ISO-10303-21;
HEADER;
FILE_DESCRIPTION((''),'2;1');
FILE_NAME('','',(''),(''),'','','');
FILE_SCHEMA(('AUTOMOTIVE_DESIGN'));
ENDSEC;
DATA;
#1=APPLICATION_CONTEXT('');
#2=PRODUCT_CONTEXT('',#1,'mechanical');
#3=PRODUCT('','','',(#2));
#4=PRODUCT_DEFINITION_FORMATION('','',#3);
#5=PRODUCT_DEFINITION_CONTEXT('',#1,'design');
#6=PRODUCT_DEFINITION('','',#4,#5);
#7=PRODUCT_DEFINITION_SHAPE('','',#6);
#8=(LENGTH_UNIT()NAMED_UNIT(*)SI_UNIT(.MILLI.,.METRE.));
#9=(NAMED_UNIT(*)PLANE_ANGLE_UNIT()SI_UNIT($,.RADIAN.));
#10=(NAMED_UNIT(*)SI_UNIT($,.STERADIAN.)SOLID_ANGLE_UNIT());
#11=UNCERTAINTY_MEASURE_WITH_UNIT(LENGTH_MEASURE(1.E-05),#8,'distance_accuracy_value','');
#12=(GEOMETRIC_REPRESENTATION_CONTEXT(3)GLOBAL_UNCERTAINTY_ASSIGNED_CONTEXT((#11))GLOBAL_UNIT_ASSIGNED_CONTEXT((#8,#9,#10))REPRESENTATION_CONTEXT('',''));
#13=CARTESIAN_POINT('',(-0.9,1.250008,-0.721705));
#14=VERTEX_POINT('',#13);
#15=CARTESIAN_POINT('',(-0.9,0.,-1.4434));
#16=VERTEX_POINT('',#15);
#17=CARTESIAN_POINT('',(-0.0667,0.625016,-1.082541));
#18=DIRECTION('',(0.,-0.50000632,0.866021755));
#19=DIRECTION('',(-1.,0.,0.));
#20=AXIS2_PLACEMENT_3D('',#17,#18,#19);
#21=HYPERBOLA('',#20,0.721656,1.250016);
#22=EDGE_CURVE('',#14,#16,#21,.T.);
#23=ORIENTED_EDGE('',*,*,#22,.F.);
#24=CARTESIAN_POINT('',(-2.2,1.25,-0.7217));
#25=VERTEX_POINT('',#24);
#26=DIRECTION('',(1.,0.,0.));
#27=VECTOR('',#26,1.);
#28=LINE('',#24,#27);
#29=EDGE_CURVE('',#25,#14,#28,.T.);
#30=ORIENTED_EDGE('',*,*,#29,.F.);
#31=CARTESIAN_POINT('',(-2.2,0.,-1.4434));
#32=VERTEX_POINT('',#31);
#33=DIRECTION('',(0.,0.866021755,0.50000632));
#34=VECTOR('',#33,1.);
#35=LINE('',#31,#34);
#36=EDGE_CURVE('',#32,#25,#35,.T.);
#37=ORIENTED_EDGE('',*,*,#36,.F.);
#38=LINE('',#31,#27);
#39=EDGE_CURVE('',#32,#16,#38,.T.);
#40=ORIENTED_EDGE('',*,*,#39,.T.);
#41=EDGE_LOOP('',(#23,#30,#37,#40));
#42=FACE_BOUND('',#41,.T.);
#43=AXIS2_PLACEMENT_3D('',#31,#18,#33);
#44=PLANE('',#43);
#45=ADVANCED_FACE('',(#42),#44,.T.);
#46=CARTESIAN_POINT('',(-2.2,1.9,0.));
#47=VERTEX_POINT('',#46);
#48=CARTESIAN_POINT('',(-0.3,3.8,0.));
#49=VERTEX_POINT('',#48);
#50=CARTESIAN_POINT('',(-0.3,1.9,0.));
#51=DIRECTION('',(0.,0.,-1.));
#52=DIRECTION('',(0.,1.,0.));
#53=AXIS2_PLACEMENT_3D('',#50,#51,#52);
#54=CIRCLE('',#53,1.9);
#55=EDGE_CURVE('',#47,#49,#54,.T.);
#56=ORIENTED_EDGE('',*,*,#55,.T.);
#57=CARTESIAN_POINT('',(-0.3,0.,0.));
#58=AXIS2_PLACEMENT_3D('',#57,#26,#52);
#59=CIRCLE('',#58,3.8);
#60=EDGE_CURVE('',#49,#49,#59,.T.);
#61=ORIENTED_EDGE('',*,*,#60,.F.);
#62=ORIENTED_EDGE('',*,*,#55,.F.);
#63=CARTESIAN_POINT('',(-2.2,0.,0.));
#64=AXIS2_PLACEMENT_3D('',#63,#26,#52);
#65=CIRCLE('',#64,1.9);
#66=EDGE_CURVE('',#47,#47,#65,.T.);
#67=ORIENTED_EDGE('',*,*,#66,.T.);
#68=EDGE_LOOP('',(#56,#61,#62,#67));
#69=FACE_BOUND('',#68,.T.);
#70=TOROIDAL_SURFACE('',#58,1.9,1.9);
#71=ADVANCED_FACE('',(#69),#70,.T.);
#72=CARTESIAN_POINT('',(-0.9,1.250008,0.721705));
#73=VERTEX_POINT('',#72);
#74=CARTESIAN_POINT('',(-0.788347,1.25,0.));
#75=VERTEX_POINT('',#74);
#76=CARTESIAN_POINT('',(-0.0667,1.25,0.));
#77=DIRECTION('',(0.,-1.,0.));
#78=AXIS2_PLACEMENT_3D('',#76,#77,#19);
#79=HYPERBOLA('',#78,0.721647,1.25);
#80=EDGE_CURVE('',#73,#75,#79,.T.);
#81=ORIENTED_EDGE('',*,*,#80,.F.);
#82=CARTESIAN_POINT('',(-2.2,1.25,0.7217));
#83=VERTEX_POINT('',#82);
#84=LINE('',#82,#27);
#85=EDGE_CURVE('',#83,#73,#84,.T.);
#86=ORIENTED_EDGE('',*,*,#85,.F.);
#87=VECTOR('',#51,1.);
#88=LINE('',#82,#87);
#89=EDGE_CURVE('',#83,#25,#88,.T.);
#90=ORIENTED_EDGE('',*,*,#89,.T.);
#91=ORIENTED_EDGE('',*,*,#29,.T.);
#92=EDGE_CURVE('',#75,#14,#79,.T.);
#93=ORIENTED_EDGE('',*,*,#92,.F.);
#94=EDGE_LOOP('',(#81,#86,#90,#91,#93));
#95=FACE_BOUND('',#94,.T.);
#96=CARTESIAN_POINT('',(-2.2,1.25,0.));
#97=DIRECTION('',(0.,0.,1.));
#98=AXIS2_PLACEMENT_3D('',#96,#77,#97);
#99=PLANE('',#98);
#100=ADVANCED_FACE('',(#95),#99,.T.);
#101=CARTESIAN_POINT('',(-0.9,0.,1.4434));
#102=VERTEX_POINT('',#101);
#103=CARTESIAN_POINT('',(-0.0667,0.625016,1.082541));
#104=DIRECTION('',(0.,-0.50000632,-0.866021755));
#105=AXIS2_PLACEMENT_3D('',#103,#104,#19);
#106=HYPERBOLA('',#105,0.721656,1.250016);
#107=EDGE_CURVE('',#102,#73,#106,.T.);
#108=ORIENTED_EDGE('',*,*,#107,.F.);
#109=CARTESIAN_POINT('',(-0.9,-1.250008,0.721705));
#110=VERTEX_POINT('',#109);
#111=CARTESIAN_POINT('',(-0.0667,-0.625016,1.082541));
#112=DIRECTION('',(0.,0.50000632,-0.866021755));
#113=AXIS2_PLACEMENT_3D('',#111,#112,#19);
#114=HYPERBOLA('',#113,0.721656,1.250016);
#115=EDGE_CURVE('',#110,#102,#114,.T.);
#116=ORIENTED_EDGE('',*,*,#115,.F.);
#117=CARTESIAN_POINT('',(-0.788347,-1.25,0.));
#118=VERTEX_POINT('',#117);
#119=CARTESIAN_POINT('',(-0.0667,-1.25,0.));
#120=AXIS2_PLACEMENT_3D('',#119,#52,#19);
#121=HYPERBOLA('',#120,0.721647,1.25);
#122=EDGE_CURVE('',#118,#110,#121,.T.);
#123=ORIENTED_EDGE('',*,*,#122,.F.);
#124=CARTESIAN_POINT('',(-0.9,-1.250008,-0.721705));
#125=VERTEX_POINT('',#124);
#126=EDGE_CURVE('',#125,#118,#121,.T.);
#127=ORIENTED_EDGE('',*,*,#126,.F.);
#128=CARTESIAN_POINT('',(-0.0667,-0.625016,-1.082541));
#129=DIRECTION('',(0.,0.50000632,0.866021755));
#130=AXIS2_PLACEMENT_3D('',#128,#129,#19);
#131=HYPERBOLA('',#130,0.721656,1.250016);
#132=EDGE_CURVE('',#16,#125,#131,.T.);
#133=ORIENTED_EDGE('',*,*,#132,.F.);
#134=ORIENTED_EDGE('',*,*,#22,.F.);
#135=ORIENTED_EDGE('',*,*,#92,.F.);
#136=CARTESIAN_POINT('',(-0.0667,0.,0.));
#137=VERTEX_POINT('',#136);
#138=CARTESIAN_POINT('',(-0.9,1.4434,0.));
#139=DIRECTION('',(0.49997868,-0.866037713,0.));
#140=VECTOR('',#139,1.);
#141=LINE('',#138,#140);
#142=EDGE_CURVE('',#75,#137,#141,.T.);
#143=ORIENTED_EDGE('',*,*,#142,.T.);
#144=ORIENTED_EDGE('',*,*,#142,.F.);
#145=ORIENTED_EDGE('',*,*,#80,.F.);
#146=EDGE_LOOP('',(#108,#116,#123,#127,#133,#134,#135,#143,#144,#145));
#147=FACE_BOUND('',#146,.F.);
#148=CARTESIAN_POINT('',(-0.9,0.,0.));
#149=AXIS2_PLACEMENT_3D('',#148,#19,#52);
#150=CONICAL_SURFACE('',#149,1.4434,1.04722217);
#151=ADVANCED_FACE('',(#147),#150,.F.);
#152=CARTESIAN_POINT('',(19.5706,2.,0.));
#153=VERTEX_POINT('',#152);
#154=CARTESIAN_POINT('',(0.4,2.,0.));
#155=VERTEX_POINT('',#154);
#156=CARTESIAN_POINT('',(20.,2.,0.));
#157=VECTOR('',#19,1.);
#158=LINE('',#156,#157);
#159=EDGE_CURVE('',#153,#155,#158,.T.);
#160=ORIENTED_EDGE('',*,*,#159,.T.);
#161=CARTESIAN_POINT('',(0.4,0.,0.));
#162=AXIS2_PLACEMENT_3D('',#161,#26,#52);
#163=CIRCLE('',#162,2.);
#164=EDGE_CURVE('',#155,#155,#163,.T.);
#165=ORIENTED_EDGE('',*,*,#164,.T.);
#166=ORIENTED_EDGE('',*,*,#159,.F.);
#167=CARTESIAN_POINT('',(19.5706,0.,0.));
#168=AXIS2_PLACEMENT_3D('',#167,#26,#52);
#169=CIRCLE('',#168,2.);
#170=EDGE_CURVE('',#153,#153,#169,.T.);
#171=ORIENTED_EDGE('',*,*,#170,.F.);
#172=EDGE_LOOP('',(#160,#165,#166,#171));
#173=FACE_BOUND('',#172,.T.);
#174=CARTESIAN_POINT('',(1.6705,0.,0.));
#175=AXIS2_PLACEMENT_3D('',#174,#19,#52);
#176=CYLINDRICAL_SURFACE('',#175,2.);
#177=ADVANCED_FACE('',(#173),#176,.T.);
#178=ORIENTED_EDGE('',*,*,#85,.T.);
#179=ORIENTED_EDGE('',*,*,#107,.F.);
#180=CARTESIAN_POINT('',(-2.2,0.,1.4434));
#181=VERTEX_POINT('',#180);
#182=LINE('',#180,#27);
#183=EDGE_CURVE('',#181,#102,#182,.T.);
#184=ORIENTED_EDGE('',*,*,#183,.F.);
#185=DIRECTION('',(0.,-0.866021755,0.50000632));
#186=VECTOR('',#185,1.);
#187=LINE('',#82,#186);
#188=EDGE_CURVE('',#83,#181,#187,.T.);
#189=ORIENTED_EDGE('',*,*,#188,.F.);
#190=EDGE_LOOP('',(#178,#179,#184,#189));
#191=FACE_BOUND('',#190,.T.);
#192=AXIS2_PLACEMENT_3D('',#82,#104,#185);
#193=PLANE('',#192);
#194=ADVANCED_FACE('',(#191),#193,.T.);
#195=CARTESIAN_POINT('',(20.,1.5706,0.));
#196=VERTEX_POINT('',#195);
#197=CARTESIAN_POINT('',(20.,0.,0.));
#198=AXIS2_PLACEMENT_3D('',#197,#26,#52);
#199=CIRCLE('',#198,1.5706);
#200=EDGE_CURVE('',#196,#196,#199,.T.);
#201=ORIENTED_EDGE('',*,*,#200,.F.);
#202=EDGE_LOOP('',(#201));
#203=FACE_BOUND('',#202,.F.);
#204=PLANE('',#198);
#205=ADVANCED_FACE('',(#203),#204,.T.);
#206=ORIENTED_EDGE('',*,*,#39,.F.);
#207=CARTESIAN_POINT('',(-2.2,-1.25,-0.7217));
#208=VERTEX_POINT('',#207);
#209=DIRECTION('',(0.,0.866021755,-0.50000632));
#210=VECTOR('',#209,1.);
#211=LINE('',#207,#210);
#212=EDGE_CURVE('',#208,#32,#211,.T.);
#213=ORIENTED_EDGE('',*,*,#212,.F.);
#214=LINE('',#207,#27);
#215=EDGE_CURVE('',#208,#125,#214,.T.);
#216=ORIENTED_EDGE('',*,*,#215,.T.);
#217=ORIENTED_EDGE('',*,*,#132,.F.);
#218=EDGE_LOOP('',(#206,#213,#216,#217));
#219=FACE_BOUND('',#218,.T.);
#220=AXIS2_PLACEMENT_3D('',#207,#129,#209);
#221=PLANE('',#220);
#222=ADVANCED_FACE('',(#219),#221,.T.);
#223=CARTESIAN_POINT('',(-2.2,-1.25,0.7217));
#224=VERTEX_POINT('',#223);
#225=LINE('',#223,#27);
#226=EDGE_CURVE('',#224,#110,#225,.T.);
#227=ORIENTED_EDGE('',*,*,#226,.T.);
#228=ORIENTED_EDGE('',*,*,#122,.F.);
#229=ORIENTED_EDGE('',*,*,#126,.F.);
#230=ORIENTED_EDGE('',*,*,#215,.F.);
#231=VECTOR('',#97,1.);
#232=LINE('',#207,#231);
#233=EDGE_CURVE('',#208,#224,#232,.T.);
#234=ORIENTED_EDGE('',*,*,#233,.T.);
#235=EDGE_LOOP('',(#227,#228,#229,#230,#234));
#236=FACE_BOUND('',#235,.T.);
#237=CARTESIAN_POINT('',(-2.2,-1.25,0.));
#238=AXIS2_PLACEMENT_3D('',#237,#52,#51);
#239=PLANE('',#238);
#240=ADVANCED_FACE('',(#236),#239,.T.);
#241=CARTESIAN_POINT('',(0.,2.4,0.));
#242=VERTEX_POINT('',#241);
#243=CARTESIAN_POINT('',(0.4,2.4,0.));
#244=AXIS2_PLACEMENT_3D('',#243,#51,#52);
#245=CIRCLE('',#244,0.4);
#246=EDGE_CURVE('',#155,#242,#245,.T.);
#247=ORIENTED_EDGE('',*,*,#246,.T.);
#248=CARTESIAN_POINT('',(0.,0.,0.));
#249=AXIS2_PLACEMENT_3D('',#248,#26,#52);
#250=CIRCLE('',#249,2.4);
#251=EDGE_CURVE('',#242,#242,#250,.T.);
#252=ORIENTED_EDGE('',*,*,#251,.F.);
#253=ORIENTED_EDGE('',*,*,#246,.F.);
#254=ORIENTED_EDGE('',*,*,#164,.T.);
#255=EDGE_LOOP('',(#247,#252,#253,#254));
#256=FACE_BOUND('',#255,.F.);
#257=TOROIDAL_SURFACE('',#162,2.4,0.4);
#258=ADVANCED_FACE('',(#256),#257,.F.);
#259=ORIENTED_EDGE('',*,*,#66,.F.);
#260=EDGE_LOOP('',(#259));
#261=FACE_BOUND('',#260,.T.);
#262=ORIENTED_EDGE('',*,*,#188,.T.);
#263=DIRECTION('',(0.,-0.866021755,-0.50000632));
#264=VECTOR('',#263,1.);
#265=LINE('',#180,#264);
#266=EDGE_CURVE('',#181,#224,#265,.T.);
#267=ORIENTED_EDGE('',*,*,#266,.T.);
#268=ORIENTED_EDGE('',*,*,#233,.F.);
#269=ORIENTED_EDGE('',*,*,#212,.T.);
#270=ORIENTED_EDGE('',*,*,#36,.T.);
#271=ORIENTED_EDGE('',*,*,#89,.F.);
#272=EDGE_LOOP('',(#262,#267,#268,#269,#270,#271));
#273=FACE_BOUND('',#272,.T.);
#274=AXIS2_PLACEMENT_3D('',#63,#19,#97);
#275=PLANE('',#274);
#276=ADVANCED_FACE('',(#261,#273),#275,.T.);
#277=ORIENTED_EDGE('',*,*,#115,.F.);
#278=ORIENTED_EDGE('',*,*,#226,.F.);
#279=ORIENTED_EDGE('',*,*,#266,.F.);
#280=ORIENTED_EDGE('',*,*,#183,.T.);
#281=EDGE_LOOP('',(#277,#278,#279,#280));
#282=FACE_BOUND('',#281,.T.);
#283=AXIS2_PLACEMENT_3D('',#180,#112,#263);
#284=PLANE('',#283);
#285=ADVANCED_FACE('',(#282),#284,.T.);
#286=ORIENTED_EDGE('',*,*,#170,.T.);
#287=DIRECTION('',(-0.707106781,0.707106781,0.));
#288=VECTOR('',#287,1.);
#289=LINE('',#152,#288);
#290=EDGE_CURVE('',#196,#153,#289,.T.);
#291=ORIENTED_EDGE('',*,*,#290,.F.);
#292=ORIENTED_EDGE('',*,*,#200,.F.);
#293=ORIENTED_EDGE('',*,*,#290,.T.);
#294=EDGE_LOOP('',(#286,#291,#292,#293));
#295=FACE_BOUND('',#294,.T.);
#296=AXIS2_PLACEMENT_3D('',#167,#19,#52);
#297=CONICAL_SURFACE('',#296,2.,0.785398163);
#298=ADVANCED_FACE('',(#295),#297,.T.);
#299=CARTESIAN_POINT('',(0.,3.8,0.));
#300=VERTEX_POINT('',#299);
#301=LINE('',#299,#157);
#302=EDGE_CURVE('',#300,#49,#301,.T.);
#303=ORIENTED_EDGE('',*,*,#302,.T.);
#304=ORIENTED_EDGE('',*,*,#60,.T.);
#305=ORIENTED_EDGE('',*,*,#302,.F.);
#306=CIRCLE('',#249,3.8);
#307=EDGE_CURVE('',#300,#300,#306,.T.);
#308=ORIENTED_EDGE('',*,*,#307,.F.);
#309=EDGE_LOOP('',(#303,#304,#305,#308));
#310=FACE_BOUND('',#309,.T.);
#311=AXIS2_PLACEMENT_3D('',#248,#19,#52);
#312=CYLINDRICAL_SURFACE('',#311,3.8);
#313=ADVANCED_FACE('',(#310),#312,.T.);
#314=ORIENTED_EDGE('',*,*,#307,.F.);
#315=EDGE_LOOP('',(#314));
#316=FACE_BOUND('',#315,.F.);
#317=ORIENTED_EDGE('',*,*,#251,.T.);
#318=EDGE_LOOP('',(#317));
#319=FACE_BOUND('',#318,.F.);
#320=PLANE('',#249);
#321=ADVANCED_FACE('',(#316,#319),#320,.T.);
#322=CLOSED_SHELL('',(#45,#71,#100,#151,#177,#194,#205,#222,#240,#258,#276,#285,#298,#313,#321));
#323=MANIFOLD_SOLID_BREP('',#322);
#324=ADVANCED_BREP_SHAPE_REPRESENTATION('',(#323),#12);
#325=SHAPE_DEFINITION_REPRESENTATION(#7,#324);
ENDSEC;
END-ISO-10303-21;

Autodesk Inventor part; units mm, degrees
ref_plane "YZ Plane" through (0, 0, 0) normal (1, 0, 0) x (0, 1, 0)
ref_plane "XZ Plane" through (0, 0, 0) normal (0, 1, 0) x (-1, 0, 0)
sketch "Sketch1" plane through (0, 0, 0) normal (0, 0, 1) x (1, 0, 0)
  line L0 (-0.0667, 0) -> (20, 0)
  line L1 (20, 0) -> (20, 2)
  line L2 (20, 2) -> (2.1, 2)
  line L3 (2.1, 2) -> (1.6705, 2)
  line L4 (1.6705, 2) -> (0, 2)
  line L5 (0, 2) -> (0, 3.8)
  line L6 (0, 3.8) -> (-2.2, 3.8)
  line L7 (-2.2, 3.8) -> (-2.2, 1.4434)
  line L8 (-2.2, 1.4434) -> (-0.9, 1.4434)
  line L9 (-0.9, 1.4434) -> (-0.0667, 0)
  line L10 (-6.64, 0) -> (24.44, 0) projected
  line L11 (0, -0.76) -> (0, 4.56) projected
  line L12 (2.1, 2) -> (0, 2) construction
  dimension "d1" = 17.9
  dimension "d2" = 0.4295
  dimension "d3" = 2.2
  dimension "d4" = 1.3
  dimension "d5" = 60
  dimension "d6" = 4
  dimension "d7" = 4
  dimension "d8" = 2.8868
  dimension "d9" = 7.6
  dimension "d26" = 20
revolve "Body" add sketch "Sketch1" angle 360 about axis through (-0.0667, 0, 0) along (1, 0, 0)
sketch "Sketch2" plane through (-2.2, 0, 0) normal (-1, 0, 0) x (0, 0, 1)
  circle A0 centre (0, 0) radius 1.4434 projected
  line L0 (0, -5.32) -> (0, 5.32) projected
  line L1 (-5.32, 0) -> (5.32, 0) projected
  line L2 (1.4434, 0) -> (0.7217, -1.25)
  line L3 (0.7217, -1.25) -> (-0.7217, -1.25)
  line L4 (-0.7217, -1.25) -> (-1.4434, 0)
  line L5 (-1.4434, 0) -> (-0.7217, 1.25)
  line L6 (-0.7217, 1.25) -> (0.7217, 1.25)
  line L7 (0.7217, 1.25) -> (1.4434, 0)
  point P0 (0, 0)
extrude "Slot" add sketch "Sketch2" against normal up to next contours L7 A0 | A0 L2 | L6 L0 A0 | A0 L0 L3 | L0 L6 A0 | A0 L3 L0 | L4 A0 | A0 L5
fillet "Fillet1" radius 1.9 1 edges at (-2.2, -3.8, 0)
thread "Thread" size "M4x0.7" class "6g" standard "ISO Metric profile" length 17.9
chamfer "Chamfer1" distance 0.4294 distance2 0.4294 1 edges at (20, -2, 0) measured on face at (20, 0.527, -0.2661)
ref_plane "Work Plane1" through (29, 0, 0) normal (0, -1, 0) x (1, 0, 0)
fillet "Fillet2" radius 0.4 1 edges at (0, -2, 0)
equation "\"d30\" = R"
equation "\"d17\" = RR"
equation "\"d13\" = GEL"
equation "\"d15\" = -0.5 * SPD + 0.5 * GD"
equation "\"d16\" = GUL"
equation "\"d1\" = GEL"
equation "\"d3\" = KOH"
equation "\"d4\" = INTI"
equation "\"d6\" = GD"
equation "\"d7\" = BDM"
equation "\"d8\" = 1.1547 * SW"
equation "\"d9\" = KOD"
equation "\"d26\" = NLG"
equation "\"GD\" = NND"
equation "\"NLG\" = 20"
equation "\"GEL\" = 17.9"
equation "\"KOD\" = 7.6"
equation "\"KOH\" = 2.2"
equation "\"INTI\" = 1.3"
equation "\"GAL\" = 0.61345 * PTC"
equation "\"GUL\" = 0.61345 * PTC"
equation "\"BDM\" = NND"
equation "\"SW\" = 2.5"
equation "\"RR\" = 1.9"
equation "\"SPD\" = NND - 1.2269 * PTC"
equation "\"R\" = 0.4"
equation "\"TOA\" = 30deg"
equation "\"GD1\" = THREADDIA - 1.2269 * PTC"
equation "\"THREADDIA\" = 4"
equation "\"PTC\" = 0.7"
equation "\"NND\" = 4"
equation "\"KOH1\" = 0.3"
equation "\"E0\" = 2.873"
properties part number "ISO 7380-1 - M4 x 20" material "Steel"
